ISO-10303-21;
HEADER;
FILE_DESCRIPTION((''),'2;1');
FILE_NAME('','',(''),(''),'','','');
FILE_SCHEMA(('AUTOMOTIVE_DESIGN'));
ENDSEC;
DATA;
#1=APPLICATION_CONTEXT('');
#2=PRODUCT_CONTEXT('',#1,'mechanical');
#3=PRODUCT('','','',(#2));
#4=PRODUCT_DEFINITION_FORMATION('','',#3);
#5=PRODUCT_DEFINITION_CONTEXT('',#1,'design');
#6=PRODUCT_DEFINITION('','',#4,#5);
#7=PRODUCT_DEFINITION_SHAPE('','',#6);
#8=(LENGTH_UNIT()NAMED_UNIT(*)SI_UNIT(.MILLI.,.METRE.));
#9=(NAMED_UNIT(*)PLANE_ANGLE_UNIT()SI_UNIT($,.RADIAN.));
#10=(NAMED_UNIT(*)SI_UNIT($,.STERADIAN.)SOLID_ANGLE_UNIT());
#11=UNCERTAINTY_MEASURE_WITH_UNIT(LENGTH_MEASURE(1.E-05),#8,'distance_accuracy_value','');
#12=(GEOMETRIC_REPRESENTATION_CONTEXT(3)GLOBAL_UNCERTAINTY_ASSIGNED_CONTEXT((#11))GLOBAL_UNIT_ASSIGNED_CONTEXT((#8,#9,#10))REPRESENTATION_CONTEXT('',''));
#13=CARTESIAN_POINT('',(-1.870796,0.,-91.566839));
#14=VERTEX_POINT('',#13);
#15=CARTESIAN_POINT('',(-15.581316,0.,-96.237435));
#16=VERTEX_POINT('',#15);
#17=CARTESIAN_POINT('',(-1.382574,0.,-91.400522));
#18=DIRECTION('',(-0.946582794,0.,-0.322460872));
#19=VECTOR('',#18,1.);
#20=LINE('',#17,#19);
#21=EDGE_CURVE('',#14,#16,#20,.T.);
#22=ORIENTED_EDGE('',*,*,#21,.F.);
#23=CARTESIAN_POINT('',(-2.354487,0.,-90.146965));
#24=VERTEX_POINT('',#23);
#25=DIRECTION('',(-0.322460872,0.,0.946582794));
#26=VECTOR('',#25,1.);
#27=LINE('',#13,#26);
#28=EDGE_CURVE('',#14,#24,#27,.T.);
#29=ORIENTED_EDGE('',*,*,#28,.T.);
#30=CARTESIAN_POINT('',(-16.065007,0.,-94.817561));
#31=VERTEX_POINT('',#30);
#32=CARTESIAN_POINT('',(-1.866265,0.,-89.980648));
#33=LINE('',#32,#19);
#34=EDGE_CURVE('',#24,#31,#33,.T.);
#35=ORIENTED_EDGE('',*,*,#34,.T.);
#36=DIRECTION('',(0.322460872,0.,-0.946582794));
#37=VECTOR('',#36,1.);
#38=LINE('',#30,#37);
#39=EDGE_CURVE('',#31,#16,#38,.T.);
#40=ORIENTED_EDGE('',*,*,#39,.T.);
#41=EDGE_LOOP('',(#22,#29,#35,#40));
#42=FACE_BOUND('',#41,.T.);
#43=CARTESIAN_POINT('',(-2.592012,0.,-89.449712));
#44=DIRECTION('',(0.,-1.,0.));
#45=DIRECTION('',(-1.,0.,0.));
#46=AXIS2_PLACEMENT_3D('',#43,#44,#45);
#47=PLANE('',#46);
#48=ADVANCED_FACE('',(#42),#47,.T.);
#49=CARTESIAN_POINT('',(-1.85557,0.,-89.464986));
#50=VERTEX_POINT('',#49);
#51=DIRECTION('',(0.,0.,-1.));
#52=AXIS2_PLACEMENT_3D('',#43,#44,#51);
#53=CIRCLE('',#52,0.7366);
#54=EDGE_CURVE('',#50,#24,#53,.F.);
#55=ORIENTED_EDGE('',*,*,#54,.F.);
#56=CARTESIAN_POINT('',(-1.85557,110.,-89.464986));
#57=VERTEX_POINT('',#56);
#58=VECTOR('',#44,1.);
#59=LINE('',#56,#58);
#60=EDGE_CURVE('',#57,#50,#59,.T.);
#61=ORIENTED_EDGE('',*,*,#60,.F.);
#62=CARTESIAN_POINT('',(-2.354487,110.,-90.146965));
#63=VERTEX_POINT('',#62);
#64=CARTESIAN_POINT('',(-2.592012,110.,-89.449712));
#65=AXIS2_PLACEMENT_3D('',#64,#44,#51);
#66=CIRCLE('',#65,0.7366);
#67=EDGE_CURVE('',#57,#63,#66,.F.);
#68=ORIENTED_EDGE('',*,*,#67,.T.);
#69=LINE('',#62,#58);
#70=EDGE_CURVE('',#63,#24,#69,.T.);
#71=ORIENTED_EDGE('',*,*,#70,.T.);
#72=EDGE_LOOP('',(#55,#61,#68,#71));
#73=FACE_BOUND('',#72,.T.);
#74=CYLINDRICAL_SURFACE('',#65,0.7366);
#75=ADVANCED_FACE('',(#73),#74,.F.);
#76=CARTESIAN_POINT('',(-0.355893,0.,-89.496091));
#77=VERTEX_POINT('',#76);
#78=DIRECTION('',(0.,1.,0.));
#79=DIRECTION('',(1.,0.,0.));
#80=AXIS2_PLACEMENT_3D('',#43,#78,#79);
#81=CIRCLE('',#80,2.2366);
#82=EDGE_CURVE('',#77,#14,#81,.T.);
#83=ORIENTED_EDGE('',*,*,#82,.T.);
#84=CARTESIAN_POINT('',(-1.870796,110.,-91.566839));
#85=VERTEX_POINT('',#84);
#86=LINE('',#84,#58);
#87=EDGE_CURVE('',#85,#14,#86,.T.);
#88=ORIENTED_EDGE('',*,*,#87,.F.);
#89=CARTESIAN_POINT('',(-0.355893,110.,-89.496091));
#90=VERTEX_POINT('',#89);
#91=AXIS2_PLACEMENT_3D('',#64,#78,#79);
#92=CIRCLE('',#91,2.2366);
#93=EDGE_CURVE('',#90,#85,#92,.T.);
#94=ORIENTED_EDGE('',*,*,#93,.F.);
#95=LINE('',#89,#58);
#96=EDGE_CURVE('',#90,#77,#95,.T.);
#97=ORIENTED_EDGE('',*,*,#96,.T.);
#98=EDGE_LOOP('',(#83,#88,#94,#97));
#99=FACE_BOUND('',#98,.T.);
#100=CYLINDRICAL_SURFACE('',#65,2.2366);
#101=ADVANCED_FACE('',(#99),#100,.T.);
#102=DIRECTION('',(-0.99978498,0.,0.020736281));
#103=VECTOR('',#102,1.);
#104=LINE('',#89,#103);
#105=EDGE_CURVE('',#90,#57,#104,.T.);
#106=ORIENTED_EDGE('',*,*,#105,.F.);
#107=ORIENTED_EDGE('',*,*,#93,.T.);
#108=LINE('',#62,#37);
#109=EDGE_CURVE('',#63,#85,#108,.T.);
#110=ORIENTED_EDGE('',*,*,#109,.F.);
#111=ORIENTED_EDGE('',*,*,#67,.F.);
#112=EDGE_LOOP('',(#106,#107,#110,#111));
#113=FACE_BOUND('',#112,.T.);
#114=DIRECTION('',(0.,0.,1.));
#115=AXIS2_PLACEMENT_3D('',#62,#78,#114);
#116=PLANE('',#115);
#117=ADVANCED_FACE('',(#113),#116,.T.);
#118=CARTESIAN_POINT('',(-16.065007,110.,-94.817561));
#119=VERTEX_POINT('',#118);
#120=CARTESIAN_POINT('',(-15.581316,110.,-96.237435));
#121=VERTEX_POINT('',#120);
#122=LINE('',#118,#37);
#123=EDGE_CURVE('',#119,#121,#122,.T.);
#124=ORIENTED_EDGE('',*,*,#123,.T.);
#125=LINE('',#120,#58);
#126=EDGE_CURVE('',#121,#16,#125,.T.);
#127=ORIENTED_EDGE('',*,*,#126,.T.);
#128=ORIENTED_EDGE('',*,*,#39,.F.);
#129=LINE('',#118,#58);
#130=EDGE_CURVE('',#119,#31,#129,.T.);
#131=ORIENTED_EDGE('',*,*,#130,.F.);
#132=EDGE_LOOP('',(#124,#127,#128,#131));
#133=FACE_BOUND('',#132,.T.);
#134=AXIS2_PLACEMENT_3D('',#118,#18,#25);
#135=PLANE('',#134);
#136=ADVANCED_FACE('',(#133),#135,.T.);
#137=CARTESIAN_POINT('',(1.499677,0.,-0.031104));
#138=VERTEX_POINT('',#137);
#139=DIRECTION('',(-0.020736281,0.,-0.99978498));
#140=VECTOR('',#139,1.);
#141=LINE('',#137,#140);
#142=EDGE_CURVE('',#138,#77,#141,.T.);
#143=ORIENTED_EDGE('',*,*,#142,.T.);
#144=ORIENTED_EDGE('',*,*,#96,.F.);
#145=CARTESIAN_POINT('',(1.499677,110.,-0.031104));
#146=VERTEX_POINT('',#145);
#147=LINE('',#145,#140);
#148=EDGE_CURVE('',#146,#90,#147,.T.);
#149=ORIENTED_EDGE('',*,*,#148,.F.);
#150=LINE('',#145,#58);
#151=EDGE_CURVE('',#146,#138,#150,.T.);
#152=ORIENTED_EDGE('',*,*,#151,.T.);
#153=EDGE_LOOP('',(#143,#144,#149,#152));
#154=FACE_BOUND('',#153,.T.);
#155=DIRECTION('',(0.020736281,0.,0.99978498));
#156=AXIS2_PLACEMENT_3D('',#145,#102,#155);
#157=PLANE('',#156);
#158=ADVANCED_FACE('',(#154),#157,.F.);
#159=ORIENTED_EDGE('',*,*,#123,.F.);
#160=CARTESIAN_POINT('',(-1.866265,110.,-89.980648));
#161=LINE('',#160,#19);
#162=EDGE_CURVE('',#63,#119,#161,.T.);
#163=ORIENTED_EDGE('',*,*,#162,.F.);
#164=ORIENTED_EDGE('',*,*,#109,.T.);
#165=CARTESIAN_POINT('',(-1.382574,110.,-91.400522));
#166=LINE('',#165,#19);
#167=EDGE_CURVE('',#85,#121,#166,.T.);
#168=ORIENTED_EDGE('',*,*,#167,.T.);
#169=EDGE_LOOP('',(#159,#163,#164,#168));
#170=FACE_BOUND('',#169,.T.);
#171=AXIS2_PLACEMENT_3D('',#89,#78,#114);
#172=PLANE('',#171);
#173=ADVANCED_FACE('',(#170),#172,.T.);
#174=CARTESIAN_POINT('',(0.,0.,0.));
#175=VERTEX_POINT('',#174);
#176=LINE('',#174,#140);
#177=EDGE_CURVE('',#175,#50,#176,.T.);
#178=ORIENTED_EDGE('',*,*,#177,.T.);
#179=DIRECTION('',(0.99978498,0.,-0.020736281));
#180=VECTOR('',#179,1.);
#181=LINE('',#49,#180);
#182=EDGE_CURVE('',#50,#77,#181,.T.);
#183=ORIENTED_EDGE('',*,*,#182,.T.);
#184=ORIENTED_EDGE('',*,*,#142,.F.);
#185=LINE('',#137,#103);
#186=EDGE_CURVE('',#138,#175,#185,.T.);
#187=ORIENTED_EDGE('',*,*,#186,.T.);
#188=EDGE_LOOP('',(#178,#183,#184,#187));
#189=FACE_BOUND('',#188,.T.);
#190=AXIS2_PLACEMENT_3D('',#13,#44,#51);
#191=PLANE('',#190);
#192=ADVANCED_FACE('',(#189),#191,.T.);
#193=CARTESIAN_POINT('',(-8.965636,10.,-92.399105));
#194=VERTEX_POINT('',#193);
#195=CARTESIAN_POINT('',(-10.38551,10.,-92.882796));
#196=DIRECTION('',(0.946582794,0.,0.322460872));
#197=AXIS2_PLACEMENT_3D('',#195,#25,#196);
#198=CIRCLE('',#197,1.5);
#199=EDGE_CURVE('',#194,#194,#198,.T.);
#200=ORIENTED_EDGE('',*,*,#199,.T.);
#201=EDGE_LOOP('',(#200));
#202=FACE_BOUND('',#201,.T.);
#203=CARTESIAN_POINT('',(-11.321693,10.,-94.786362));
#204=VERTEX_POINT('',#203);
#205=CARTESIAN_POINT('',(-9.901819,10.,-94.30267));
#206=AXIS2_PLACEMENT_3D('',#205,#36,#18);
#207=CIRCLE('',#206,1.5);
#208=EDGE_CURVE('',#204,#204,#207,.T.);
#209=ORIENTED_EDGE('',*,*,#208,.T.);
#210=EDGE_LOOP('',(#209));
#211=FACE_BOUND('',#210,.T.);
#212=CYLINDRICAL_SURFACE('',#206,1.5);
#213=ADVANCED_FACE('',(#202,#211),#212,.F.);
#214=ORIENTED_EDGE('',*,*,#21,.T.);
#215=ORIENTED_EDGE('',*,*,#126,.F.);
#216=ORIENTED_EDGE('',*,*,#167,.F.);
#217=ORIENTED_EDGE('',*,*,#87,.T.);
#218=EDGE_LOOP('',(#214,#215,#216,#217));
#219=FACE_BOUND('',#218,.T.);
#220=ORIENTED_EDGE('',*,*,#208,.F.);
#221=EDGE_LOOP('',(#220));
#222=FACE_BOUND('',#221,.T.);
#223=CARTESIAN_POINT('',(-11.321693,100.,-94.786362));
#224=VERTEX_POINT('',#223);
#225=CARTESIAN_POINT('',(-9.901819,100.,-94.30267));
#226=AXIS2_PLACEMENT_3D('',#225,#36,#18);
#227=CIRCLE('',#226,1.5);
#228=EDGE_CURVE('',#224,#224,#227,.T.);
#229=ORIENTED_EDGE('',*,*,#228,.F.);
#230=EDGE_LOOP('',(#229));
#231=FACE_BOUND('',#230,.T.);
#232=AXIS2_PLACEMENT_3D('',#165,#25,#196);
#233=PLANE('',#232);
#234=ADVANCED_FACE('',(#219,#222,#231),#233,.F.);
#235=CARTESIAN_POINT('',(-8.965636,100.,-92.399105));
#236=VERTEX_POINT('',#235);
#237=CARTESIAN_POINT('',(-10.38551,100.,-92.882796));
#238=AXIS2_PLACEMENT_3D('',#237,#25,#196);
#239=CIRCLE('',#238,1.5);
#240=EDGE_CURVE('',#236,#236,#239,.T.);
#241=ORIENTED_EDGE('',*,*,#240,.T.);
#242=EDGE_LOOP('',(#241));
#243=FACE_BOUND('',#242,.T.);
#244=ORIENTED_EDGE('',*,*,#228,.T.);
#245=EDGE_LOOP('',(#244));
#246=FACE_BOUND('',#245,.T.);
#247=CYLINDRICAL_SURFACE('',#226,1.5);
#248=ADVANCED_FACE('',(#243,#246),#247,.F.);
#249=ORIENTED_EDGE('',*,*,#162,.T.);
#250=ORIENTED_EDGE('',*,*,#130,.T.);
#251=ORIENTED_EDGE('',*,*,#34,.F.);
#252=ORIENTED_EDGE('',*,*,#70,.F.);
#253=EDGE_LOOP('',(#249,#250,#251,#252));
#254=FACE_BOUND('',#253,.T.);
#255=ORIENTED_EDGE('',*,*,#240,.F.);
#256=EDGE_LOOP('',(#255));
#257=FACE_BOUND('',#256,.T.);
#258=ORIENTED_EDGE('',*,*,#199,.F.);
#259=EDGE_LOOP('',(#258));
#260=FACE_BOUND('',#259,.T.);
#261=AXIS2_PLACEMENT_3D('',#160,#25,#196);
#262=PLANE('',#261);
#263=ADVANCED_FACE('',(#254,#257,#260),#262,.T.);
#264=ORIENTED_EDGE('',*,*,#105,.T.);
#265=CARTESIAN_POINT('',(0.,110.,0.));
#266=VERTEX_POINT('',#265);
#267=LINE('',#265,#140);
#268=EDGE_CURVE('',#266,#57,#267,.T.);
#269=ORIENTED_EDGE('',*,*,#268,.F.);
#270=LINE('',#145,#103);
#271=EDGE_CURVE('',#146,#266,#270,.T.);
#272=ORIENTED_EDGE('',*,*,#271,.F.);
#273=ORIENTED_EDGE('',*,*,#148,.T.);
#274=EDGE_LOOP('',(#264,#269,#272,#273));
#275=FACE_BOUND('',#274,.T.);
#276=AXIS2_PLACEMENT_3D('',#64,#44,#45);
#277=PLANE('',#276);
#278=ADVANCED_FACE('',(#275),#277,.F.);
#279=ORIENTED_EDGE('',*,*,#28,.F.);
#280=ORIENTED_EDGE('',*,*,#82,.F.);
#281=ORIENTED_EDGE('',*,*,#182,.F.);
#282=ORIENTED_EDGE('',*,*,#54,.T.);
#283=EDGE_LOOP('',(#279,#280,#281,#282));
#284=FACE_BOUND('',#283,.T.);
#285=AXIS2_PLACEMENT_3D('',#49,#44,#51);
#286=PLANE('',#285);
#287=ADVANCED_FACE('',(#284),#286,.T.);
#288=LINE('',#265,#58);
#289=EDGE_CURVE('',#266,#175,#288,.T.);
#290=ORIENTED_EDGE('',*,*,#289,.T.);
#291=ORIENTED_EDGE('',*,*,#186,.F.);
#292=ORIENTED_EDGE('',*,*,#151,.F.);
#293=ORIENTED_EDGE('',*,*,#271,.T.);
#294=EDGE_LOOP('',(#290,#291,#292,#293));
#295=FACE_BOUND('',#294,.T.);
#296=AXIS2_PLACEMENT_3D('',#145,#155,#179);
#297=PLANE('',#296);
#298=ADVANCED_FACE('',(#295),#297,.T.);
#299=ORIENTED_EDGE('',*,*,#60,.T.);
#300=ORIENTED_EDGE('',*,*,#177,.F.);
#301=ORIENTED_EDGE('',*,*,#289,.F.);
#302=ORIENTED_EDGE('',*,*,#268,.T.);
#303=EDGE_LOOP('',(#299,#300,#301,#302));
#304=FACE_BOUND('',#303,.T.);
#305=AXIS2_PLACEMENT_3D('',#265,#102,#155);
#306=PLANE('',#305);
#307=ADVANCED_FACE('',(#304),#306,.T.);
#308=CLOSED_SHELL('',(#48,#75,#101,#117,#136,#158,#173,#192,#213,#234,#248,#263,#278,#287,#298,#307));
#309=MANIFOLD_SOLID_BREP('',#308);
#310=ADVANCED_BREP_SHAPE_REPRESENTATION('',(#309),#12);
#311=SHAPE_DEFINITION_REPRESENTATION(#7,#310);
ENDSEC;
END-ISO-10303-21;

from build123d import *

# Parameters (mm, degrees)
BASE_FLANGE1_DEPTH          = 110
F_3_0MM_PRESS_DOWEL_HOLE1_D = 3


# Sheet-metal steps are written as plain solids
with BuildPart() as part:
    # Sketch1 → Base-Flange1 (new body)
    with BuildSketch(Plane(origin=(0, 0, 0), x_dir=(1, 0, 0), z_dir=(0, 1, 0))):
        with BuildLine():
            Line((0, 0), (-1.855570085, 89.464986247))
            ThreePointArc((-1.855570085, 89.464986247), (-1.99751505, 89.884629471), (-2.354487023, 90.146964789))
            Line((-2.354487023, 90.146964789), (-16.065007208, 94.817561297))
            Line((-16.065007208, 94.817561297), (-15.5813159, 96.237435489))
            Line((-15.5813159, 96.237435489), (-1.870795715, 91.56683898))
            ThreePointArc((-1.870795715, 91.56683898), (-0.786891948, 90.770288381), (-0.355892615, 89.496090669))
            Line((-0.355892615, 89.496090669), (1.49967747, 0.031104422))
            Line((1.49967747, 0.031104422), (0, 0))
        make_face()
    extrude(amount=BASE_FLANGE1_DEPTH)

    # Ø3.0mm Press Dowel Hole1 (through all)
    with Locations(Plane(origin=(27.754960473, 0, -81.474592183), x_dir=(-0.9465827940969574, 0, -0.32246087192029516), z_dir=(0.32246087192029516, 0, -0.9465827940969574))):
        with Locations((39.781812899, 10), (39.781812899, 100)):
            Hole(F_3_0MM_PRESS_DOWEL_HOLE1_D / 2)


solid = part.part
